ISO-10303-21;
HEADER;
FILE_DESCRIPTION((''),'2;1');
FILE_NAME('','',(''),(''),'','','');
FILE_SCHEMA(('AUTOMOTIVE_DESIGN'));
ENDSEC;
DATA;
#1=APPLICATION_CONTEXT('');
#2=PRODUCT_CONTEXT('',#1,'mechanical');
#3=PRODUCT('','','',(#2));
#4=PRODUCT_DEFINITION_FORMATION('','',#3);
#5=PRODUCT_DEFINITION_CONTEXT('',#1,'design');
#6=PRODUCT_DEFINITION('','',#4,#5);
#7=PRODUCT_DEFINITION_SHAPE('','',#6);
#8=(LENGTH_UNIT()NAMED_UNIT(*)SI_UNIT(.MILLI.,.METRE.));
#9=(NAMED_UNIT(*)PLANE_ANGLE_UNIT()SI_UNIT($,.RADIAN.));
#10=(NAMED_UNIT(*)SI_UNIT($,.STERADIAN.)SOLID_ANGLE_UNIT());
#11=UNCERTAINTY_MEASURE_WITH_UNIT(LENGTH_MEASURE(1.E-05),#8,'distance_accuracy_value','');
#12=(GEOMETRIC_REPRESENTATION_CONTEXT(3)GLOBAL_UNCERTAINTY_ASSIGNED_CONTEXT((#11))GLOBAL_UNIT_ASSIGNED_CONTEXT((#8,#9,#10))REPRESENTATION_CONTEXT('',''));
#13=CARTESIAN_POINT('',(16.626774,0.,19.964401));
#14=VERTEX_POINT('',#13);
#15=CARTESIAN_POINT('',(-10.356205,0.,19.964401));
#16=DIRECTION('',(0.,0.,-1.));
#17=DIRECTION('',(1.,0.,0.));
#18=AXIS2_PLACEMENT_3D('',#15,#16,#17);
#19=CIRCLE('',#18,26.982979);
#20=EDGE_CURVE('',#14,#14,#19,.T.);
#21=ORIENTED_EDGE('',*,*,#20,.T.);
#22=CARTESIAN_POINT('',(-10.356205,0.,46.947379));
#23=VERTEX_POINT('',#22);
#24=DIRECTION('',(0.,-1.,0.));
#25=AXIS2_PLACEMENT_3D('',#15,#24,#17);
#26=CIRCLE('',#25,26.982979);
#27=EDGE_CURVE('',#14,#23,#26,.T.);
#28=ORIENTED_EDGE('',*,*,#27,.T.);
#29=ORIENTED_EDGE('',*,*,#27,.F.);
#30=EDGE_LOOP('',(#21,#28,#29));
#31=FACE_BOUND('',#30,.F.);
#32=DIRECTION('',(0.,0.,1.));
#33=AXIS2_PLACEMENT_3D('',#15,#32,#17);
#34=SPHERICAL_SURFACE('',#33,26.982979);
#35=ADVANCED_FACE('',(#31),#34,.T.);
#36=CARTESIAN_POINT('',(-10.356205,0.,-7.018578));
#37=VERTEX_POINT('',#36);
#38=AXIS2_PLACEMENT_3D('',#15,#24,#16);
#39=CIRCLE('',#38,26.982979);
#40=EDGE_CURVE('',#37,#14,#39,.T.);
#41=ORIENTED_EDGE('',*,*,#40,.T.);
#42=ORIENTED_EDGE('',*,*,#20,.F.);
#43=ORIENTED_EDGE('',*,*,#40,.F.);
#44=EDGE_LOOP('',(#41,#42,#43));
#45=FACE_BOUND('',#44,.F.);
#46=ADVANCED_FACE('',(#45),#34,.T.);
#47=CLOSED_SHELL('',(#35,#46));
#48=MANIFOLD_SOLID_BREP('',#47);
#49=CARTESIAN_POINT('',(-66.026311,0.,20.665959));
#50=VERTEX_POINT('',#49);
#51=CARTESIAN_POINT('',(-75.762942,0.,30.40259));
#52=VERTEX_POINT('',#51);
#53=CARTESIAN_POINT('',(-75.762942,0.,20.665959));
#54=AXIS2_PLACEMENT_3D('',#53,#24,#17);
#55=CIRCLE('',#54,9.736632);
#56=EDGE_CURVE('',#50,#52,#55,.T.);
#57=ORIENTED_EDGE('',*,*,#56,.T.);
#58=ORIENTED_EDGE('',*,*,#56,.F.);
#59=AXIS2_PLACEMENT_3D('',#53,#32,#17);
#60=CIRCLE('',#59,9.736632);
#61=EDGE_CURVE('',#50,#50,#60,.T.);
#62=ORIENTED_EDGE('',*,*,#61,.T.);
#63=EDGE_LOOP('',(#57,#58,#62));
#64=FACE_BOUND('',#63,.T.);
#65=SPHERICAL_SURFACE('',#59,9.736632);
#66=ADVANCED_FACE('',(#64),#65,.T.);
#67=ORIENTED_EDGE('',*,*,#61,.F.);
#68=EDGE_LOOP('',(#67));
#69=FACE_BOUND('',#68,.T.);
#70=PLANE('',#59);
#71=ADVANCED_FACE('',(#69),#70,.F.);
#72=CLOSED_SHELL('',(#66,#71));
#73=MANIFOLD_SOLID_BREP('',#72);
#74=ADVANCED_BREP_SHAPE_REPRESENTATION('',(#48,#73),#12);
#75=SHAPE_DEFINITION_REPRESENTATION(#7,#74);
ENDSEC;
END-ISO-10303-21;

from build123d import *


# Not quite as in the source:
# - ends of sketch curves that miss each other by under 0.0002 mm in the source are joined


with BuildPart() as f1:
    # F0 (on Front) → F1 (revolve)
    with BuildSketch(Plane.XZ):
        with BuildLine():
            ThreePointArc((-10.3562049295, -7.0185781017), (8.7236423428, 0.8845534065), (16.626773851, 19.9644006789))
            ThreePointArc((16.626773851, 19.9644006789), (8.7236423428, 39.0442479512), (-10.3562049295, 46.9473794594))
            Line((-10.3562049295, 46.9473794594), (-10.3562049295, -7.0185781017))
        make_face()
    revolve(axis=Axis((-10.3562049295, 0, 19.9644006789), (0, 0, -1)))


with BuildPart() as f3:
    # F2 (on Front) → F3 (revolve)
    with BuildSketch(Plane.XZ):
        with BuildLine():
            Line((-75.7629424334, 20.6659585238), (-66.0263107651, 20.6659585238))
            ThreePointArc((-66.0263107651, 20.6659585238), (-68.8781041548, 27.5507968023), (-75.7629424334, 30.402590192))
            Line((-75.7629424334, 30.402590192), (-75.7629424334, 20.6659585238))
        make_face()
    revolve(axis=Axis((-75.7629424334, 0, 25.5342743579), (0, 0, 1)))


solid = Compound([f1.part, f3.part])
